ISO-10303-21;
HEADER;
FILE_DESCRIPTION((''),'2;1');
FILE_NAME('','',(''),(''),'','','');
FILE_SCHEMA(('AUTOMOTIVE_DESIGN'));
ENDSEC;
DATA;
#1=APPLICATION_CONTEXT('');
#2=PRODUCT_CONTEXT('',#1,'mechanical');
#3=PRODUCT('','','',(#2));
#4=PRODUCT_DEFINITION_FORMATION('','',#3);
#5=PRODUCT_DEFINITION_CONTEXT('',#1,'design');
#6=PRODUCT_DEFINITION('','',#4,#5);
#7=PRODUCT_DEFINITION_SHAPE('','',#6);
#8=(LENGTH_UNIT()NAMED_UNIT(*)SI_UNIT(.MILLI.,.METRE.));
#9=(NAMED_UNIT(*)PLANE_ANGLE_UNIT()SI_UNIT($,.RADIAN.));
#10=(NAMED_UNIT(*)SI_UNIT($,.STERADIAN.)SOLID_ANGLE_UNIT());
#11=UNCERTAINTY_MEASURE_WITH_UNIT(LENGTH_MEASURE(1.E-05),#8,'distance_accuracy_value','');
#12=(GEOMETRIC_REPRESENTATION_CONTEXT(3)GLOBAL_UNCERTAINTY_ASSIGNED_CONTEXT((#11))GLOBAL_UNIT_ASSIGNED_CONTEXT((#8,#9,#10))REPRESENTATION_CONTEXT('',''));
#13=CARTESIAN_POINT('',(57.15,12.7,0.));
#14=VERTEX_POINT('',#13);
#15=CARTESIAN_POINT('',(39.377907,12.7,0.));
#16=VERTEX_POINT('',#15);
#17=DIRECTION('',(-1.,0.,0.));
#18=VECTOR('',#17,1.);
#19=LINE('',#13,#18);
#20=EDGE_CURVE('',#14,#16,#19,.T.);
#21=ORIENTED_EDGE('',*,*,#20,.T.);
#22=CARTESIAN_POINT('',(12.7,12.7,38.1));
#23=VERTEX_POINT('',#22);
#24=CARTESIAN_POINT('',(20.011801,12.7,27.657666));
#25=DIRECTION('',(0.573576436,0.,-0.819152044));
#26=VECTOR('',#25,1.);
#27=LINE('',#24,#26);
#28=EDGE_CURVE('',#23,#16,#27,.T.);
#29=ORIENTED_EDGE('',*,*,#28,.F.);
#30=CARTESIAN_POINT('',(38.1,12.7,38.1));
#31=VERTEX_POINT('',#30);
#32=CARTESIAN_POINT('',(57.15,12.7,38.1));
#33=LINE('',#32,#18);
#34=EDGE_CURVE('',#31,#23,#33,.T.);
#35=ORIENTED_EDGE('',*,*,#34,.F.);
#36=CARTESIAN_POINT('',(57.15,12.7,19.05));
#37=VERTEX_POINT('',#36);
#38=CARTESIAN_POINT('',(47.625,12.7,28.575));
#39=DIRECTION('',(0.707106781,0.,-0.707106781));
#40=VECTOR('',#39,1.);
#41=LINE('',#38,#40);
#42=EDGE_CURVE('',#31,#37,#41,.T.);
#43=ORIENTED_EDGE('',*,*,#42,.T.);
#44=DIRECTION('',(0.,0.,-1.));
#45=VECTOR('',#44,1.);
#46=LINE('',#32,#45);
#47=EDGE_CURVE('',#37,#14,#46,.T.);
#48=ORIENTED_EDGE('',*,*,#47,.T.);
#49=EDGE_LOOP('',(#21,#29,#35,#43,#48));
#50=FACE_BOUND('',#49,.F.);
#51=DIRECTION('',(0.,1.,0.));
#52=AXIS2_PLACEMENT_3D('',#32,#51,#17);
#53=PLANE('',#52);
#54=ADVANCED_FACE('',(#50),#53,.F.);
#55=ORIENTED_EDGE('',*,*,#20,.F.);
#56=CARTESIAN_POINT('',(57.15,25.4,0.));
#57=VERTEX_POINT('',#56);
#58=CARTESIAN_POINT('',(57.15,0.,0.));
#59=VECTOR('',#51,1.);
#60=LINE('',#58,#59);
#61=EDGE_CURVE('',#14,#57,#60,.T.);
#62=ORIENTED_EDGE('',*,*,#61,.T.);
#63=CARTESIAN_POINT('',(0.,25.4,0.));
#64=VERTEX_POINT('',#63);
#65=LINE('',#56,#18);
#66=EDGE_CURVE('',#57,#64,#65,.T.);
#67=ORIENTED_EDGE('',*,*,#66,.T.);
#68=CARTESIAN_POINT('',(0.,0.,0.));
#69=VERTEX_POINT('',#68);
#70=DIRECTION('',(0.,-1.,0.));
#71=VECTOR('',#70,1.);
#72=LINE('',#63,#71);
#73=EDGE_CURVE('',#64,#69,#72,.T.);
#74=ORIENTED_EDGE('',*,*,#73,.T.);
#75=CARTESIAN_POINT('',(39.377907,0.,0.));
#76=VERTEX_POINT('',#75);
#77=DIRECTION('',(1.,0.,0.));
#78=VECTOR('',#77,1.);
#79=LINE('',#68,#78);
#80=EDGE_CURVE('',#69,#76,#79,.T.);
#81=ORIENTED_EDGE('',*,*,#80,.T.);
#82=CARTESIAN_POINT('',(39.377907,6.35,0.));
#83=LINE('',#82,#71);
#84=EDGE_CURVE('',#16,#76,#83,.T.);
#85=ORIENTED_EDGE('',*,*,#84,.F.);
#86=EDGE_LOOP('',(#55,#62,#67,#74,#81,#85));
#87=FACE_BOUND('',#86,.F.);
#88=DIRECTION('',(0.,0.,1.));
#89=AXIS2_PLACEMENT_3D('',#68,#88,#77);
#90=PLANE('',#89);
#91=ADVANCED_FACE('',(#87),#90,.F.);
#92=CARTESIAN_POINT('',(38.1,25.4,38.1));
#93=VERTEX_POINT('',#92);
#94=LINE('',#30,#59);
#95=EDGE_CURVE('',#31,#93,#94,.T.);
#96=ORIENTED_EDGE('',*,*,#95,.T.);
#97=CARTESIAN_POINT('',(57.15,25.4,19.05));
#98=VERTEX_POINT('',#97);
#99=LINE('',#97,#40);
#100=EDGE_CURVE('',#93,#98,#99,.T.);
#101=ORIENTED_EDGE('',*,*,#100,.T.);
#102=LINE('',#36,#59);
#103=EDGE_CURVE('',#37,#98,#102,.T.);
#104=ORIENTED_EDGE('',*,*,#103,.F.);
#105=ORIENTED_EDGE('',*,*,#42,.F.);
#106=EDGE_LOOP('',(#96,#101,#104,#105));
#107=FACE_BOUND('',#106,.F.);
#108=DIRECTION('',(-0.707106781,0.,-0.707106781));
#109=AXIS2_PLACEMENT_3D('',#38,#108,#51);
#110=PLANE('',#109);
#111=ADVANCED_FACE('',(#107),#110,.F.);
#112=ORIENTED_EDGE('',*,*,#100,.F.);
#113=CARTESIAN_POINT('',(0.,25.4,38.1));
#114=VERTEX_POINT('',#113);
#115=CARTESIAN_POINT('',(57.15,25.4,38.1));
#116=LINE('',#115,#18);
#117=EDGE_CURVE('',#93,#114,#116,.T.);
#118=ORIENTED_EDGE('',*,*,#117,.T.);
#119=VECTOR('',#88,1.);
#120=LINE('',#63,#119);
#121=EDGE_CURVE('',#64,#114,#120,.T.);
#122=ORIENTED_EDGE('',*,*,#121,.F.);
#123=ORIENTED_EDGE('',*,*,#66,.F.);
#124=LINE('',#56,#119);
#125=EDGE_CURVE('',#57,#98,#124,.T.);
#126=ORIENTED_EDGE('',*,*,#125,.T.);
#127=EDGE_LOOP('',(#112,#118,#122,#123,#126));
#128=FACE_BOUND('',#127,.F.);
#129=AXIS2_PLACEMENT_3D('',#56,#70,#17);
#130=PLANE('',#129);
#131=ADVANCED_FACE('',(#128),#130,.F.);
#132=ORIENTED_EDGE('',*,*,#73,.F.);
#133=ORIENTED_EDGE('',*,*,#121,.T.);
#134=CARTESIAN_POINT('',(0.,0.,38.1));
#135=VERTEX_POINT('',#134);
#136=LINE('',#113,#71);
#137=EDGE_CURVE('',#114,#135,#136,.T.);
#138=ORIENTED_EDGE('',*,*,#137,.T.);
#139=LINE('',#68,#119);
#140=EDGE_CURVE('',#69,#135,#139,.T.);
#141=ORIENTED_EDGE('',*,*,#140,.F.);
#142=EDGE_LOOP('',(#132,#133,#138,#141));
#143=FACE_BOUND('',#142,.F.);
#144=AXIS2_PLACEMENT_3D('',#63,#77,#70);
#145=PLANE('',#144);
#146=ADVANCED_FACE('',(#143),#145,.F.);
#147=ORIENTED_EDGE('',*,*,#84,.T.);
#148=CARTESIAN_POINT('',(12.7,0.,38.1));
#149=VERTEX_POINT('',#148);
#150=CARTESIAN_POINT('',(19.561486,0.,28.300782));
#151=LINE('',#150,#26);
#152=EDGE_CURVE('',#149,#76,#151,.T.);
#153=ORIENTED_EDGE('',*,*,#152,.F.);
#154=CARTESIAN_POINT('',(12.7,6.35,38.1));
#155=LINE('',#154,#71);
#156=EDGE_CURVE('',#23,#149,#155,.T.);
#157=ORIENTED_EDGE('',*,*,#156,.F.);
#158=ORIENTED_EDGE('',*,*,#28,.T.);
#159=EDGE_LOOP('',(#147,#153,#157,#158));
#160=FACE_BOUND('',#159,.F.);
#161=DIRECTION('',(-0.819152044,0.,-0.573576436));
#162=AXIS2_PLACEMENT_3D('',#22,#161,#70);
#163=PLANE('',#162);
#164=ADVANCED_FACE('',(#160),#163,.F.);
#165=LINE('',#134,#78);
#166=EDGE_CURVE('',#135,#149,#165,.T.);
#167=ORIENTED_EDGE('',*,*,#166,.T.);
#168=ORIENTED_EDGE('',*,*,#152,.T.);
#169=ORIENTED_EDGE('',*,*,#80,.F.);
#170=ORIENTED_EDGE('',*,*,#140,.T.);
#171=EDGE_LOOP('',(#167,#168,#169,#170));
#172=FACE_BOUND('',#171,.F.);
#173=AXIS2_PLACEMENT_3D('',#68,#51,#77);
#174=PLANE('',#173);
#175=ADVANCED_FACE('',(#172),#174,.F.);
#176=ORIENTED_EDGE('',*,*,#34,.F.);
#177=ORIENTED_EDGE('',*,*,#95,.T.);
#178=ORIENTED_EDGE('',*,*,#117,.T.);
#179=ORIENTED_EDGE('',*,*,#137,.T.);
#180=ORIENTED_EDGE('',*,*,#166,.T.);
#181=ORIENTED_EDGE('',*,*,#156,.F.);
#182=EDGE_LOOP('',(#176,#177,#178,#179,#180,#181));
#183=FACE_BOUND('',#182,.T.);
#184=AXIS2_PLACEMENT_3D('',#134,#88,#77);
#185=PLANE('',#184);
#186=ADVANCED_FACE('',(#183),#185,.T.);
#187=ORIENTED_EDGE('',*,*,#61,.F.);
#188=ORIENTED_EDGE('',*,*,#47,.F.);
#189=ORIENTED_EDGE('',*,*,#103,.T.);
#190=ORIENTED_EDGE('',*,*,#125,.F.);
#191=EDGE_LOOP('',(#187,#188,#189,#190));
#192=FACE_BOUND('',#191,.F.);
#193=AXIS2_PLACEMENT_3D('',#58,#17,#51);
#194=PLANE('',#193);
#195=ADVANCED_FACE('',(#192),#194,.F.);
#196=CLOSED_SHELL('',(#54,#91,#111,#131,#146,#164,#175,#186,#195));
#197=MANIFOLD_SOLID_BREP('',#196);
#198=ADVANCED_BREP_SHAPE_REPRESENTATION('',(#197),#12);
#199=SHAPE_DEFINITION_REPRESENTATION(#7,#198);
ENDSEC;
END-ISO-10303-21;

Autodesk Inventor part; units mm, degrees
ref_plane "YZ Plane" through (0, 0, 0) normal (1, 0, 0) x (0, 1, 0)
ref_plane "XZ Plane" through (0, 0, 0) normal (0, 1, 0) x (-1, 0, 0)
ref_plane "XY Plane" through (0, 0, 0) normal (0, 0, 1) x (1, 0, 0)
sketch "Sketch1" plane through (0, 0, 0) normal (0, 0, 1) x (1, 0, 0)
  line L0 (0, 0) -> (57.15, 0)
  line L1 (57.15, 0) -> (57.15, 25.4)
  line L2 (57.15, 25.4) -> (0, 25.4)
  line L3 (0, 25.4) -> (0, 0)
  dimension "d0" = 57.15
  dimension "d1" = 25.4
extrude "Extrusion1" add sketch "Sketch1" along normal blind 38.1
sketch "Sketch2" plane through (0, 0, 38.1) normal (0, 0, 1) x (1, 0, 0)
  point P0 (0, 0)
sketch "Sketch3" plane through (0, 0, 38.1) normal (0, 0, 1) x (1, 0, 0)
  line L0 (57.355, 0) -> (57.15, 12.7)
  line L1 (57.15, 0) -> (57.15, 25.4) projected
  line L2 (57.15, 12.7) -> (12.7, 12.7)
  line L3 (12.7, 12.7) -> (12.7, 0)
  line L4 (0, 0) -> (57.15, 0) projected
  line L5 (57.15, 0) -> (12.7, 0)
  dimension "d4" = 44.45
extrude "Extrusion2" cut sketch "Sketch3" against normal blind 38.1
draft "FaceDraft1" angle 35 pull direction (0, 0, 1) faces at (12.7, 8.4667, 25.4) fixed edges at (12.7, 6.35, 38.1)
chamfer "Chamfer1" distance 19.05 angle 45 1 edges at (57.15, 19.05, 38.1)
properties part number "Unit 7.1 part 4"
